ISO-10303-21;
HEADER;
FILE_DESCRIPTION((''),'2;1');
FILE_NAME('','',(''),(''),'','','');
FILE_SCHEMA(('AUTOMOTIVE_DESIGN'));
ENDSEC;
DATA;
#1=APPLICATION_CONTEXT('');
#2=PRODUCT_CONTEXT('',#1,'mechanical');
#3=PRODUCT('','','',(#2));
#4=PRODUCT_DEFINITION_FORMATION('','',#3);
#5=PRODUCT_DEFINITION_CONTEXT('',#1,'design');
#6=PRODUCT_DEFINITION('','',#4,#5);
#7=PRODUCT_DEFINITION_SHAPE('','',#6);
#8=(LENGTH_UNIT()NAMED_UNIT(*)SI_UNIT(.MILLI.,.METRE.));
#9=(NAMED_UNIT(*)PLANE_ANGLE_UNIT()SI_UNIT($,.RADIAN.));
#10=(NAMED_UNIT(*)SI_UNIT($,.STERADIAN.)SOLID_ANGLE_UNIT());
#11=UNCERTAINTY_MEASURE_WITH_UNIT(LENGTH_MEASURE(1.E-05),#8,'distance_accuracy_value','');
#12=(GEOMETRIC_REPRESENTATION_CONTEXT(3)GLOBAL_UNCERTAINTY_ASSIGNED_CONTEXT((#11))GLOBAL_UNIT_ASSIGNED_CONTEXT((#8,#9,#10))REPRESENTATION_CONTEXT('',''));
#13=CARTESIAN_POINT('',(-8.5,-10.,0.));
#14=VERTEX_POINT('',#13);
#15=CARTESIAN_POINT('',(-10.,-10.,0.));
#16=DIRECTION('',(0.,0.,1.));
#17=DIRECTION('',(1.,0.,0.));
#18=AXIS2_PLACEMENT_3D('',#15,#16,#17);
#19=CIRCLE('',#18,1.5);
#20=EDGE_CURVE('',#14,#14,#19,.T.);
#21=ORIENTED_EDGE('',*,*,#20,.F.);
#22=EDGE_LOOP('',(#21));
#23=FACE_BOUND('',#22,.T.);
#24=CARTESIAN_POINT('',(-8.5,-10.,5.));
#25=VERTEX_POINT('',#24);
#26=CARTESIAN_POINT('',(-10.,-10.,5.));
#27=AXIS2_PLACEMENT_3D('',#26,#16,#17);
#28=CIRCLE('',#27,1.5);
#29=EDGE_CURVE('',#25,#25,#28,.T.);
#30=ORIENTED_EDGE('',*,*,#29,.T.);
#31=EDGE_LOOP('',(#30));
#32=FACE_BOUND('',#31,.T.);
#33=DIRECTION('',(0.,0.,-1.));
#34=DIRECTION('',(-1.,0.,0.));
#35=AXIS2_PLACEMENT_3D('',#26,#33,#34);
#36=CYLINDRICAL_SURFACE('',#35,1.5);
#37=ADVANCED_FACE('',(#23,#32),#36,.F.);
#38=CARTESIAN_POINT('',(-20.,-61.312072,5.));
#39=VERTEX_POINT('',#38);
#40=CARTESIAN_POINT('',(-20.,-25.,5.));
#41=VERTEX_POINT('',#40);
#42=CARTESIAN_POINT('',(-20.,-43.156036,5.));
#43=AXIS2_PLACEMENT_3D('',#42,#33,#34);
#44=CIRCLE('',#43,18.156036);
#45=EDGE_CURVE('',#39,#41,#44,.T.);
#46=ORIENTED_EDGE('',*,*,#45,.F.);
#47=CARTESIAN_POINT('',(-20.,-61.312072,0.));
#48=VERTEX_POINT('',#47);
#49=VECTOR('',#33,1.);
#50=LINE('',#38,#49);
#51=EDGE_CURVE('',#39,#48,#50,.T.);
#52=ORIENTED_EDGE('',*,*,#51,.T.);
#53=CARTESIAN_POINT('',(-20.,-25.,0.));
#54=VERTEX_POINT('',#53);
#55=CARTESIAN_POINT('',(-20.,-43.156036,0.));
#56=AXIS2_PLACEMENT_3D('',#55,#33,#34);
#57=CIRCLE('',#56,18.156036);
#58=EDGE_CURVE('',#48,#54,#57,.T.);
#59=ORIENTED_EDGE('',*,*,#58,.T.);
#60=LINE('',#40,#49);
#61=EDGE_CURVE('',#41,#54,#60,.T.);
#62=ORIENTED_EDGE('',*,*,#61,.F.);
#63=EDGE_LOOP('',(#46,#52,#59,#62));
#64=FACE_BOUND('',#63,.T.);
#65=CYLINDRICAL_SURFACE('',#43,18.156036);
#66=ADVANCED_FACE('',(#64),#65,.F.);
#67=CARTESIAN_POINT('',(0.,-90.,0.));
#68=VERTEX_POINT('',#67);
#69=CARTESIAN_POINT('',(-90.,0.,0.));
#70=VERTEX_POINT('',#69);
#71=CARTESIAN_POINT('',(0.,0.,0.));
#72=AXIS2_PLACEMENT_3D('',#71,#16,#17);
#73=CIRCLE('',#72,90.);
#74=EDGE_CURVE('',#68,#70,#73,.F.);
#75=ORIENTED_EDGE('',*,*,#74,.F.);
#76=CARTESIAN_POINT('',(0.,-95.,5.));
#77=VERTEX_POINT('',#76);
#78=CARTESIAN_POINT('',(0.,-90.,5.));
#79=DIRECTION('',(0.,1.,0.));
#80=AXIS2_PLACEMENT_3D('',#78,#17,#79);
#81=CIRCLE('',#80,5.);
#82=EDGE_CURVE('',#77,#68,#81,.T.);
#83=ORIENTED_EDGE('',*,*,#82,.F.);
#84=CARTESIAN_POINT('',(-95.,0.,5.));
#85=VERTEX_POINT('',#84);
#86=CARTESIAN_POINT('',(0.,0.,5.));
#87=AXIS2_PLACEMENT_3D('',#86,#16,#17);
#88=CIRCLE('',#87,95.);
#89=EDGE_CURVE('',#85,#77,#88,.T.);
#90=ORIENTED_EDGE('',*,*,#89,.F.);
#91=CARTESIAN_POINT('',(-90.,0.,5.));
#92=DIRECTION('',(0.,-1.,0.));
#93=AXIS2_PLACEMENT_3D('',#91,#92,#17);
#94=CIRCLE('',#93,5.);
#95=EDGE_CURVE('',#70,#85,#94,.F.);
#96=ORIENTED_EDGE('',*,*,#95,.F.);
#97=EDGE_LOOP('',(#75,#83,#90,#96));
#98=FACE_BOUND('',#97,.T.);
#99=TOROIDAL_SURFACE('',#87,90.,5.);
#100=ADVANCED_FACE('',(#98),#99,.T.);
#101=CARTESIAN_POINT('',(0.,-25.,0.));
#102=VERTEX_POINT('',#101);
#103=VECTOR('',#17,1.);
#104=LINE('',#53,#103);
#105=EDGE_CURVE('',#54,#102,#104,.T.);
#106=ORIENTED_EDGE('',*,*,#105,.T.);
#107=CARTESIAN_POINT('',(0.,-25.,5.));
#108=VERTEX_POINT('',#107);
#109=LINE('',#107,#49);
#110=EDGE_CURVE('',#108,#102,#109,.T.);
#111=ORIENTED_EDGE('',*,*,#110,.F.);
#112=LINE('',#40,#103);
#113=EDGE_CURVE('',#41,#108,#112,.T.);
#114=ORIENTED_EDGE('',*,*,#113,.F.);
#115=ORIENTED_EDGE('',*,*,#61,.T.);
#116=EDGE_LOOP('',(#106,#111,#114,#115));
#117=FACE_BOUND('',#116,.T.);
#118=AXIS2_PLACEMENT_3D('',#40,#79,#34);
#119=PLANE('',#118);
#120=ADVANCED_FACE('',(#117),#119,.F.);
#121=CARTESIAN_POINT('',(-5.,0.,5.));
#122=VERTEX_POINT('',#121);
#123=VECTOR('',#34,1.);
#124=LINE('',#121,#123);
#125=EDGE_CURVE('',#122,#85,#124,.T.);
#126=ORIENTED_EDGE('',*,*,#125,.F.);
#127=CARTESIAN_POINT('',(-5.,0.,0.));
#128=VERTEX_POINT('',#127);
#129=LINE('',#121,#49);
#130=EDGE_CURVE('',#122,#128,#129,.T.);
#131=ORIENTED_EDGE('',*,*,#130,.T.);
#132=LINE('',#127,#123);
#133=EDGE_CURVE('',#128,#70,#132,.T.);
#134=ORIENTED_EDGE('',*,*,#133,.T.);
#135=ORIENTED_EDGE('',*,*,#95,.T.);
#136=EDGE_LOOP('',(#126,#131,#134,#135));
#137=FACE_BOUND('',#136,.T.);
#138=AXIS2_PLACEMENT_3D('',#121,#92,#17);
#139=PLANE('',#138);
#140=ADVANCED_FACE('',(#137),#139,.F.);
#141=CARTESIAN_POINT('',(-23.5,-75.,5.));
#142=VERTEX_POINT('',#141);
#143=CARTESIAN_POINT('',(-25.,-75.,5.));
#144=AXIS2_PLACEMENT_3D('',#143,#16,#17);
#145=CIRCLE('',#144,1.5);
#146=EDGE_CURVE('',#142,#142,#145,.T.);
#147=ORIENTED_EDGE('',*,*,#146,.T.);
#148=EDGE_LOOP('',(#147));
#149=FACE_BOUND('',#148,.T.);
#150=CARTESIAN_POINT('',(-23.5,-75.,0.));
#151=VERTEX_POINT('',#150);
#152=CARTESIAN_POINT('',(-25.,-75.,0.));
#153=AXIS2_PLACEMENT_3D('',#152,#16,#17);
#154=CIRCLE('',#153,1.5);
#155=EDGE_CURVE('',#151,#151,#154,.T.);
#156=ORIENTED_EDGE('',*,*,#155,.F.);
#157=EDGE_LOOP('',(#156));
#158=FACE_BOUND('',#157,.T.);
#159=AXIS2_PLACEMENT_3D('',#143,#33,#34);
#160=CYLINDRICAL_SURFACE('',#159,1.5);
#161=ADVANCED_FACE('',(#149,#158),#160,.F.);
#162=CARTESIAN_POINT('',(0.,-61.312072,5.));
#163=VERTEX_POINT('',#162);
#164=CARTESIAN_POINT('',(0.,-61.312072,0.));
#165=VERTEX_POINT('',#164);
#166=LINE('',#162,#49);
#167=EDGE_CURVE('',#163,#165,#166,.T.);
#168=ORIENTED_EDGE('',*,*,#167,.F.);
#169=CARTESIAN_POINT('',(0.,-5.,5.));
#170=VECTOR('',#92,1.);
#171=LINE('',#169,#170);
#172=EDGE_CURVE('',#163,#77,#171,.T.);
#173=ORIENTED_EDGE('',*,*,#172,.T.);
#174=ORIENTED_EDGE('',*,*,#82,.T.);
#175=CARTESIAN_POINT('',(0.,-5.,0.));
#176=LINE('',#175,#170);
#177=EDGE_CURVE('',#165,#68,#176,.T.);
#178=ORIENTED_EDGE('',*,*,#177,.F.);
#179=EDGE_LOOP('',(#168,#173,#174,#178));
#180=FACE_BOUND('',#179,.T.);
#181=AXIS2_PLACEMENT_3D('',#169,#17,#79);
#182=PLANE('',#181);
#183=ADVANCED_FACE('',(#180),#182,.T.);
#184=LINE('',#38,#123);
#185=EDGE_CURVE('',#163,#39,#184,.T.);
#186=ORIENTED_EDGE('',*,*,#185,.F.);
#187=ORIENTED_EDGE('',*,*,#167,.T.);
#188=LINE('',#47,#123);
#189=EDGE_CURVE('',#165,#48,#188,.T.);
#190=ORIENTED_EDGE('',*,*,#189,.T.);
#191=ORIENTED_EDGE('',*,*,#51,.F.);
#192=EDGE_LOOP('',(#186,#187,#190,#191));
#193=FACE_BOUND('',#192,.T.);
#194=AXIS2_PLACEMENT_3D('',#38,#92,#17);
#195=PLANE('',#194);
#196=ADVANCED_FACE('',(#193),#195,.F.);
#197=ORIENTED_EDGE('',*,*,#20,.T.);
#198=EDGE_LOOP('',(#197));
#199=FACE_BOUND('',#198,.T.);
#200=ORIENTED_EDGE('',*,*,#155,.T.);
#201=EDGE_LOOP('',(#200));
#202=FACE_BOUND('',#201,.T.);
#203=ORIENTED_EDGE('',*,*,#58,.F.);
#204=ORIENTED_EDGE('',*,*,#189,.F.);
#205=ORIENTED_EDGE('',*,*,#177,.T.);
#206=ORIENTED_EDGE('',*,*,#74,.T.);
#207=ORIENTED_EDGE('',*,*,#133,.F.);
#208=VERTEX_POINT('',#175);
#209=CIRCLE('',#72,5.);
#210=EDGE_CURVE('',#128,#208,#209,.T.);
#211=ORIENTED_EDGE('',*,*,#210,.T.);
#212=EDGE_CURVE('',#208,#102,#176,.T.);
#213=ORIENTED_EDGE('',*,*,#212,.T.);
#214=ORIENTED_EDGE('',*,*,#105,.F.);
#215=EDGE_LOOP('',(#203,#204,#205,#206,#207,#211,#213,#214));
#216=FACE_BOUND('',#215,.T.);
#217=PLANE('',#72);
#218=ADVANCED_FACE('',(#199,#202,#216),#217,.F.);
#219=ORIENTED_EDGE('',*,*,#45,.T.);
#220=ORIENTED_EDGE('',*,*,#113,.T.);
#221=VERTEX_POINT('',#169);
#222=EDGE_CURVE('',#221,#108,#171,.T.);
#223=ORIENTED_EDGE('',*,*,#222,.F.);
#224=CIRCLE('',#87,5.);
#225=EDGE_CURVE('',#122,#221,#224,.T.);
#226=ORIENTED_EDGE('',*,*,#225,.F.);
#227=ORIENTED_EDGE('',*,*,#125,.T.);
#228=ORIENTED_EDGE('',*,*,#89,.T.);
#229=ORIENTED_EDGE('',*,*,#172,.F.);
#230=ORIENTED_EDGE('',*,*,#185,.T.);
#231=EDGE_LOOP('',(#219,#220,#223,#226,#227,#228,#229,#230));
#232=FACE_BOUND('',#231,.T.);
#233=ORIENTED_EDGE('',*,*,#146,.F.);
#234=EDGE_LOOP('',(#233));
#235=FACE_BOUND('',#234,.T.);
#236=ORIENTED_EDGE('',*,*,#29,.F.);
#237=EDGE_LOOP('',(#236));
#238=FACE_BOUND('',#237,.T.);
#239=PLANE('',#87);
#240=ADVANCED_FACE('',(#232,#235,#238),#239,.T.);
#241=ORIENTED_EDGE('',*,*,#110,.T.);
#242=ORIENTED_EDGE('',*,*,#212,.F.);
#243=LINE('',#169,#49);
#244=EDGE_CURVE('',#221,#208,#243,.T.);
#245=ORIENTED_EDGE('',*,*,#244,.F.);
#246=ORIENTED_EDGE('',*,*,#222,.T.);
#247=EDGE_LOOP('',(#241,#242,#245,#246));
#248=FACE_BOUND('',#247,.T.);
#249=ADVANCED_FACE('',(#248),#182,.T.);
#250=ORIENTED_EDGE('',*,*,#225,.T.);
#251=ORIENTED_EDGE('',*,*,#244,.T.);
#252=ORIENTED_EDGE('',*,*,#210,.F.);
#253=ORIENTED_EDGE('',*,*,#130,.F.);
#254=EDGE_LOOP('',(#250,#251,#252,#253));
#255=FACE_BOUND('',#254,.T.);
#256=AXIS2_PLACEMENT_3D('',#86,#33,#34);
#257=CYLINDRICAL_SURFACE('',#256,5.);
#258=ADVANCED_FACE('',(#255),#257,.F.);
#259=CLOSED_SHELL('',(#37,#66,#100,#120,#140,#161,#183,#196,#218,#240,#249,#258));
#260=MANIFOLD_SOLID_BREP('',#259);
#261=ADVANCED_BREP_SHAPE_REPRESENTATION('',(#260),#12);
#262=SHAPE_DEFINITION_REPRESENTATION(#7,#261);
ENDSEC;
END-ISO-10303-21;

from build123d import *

# Parameters (mm, degrees)
SKETCH_1_R          = 1.5
EXTRUDE_1_DEPTH     = 5
CUT_EXTRUDE_1_DEPTH = 135.443296597
FILLET_2_R          = 5


with BuildPart() as part:
    # 草圖1 → 填料-伸長1 (new body)
    with BuildSketch(Plane.XY):
        with BuildLine():
            Line((-5, 0), (-95, 0))
            ThreePointArc((-95, 0), (-67.175144213, -67.175144213), (0, -95))
            Line((0, -95), (0, -5))
            ThreePointArc((0, -5), (-3.535533906, -3.535533906), (-5, 0))
        make_face()
        with Locations((-10, -10)):
            Circle(SKETCH_1_R, mode=Mode.SUBTRACT)
        with Locations((-25, -75)):
            Circle(SKETCH_1_R, mode=Mode.SUBTRACT)
    extrude(amount=EXTRUDE_1_DEPTH)

    # 草圖2 → 除料-伸長1 (cut, through all)
    with BuildSketch(Plane(origin=(0, 0, 0), x_dir=(-1, 0, 0), z_dir=(0, 0, -1))):
        with BuildLine():
            Line((0, -25), (0, -61.312071511))
            Line((0, -61.312071511), (20, -61.312071511))
            ThreePointArc((20, -61.312071511), (38.156035755, -43.156035755), (20, -25))
            Line((20, -25), (0, -25))
        make_face()
    extrude(amount=-CUT_EXTRUDE_1_DEPTH, mode=Mode.SUBTRACT)

    # 圓角2
    fillet_2_edges = [part.edges().sort_by_distance(p)[0] for p in [
        (-67.175144213, -67.175144213, 0),
    ]]
    fillet(fillet_2_edges, radius=FILLET_2_R - 0.0001)  # a hair under: the kernel refuses the full size


solid = part.part
